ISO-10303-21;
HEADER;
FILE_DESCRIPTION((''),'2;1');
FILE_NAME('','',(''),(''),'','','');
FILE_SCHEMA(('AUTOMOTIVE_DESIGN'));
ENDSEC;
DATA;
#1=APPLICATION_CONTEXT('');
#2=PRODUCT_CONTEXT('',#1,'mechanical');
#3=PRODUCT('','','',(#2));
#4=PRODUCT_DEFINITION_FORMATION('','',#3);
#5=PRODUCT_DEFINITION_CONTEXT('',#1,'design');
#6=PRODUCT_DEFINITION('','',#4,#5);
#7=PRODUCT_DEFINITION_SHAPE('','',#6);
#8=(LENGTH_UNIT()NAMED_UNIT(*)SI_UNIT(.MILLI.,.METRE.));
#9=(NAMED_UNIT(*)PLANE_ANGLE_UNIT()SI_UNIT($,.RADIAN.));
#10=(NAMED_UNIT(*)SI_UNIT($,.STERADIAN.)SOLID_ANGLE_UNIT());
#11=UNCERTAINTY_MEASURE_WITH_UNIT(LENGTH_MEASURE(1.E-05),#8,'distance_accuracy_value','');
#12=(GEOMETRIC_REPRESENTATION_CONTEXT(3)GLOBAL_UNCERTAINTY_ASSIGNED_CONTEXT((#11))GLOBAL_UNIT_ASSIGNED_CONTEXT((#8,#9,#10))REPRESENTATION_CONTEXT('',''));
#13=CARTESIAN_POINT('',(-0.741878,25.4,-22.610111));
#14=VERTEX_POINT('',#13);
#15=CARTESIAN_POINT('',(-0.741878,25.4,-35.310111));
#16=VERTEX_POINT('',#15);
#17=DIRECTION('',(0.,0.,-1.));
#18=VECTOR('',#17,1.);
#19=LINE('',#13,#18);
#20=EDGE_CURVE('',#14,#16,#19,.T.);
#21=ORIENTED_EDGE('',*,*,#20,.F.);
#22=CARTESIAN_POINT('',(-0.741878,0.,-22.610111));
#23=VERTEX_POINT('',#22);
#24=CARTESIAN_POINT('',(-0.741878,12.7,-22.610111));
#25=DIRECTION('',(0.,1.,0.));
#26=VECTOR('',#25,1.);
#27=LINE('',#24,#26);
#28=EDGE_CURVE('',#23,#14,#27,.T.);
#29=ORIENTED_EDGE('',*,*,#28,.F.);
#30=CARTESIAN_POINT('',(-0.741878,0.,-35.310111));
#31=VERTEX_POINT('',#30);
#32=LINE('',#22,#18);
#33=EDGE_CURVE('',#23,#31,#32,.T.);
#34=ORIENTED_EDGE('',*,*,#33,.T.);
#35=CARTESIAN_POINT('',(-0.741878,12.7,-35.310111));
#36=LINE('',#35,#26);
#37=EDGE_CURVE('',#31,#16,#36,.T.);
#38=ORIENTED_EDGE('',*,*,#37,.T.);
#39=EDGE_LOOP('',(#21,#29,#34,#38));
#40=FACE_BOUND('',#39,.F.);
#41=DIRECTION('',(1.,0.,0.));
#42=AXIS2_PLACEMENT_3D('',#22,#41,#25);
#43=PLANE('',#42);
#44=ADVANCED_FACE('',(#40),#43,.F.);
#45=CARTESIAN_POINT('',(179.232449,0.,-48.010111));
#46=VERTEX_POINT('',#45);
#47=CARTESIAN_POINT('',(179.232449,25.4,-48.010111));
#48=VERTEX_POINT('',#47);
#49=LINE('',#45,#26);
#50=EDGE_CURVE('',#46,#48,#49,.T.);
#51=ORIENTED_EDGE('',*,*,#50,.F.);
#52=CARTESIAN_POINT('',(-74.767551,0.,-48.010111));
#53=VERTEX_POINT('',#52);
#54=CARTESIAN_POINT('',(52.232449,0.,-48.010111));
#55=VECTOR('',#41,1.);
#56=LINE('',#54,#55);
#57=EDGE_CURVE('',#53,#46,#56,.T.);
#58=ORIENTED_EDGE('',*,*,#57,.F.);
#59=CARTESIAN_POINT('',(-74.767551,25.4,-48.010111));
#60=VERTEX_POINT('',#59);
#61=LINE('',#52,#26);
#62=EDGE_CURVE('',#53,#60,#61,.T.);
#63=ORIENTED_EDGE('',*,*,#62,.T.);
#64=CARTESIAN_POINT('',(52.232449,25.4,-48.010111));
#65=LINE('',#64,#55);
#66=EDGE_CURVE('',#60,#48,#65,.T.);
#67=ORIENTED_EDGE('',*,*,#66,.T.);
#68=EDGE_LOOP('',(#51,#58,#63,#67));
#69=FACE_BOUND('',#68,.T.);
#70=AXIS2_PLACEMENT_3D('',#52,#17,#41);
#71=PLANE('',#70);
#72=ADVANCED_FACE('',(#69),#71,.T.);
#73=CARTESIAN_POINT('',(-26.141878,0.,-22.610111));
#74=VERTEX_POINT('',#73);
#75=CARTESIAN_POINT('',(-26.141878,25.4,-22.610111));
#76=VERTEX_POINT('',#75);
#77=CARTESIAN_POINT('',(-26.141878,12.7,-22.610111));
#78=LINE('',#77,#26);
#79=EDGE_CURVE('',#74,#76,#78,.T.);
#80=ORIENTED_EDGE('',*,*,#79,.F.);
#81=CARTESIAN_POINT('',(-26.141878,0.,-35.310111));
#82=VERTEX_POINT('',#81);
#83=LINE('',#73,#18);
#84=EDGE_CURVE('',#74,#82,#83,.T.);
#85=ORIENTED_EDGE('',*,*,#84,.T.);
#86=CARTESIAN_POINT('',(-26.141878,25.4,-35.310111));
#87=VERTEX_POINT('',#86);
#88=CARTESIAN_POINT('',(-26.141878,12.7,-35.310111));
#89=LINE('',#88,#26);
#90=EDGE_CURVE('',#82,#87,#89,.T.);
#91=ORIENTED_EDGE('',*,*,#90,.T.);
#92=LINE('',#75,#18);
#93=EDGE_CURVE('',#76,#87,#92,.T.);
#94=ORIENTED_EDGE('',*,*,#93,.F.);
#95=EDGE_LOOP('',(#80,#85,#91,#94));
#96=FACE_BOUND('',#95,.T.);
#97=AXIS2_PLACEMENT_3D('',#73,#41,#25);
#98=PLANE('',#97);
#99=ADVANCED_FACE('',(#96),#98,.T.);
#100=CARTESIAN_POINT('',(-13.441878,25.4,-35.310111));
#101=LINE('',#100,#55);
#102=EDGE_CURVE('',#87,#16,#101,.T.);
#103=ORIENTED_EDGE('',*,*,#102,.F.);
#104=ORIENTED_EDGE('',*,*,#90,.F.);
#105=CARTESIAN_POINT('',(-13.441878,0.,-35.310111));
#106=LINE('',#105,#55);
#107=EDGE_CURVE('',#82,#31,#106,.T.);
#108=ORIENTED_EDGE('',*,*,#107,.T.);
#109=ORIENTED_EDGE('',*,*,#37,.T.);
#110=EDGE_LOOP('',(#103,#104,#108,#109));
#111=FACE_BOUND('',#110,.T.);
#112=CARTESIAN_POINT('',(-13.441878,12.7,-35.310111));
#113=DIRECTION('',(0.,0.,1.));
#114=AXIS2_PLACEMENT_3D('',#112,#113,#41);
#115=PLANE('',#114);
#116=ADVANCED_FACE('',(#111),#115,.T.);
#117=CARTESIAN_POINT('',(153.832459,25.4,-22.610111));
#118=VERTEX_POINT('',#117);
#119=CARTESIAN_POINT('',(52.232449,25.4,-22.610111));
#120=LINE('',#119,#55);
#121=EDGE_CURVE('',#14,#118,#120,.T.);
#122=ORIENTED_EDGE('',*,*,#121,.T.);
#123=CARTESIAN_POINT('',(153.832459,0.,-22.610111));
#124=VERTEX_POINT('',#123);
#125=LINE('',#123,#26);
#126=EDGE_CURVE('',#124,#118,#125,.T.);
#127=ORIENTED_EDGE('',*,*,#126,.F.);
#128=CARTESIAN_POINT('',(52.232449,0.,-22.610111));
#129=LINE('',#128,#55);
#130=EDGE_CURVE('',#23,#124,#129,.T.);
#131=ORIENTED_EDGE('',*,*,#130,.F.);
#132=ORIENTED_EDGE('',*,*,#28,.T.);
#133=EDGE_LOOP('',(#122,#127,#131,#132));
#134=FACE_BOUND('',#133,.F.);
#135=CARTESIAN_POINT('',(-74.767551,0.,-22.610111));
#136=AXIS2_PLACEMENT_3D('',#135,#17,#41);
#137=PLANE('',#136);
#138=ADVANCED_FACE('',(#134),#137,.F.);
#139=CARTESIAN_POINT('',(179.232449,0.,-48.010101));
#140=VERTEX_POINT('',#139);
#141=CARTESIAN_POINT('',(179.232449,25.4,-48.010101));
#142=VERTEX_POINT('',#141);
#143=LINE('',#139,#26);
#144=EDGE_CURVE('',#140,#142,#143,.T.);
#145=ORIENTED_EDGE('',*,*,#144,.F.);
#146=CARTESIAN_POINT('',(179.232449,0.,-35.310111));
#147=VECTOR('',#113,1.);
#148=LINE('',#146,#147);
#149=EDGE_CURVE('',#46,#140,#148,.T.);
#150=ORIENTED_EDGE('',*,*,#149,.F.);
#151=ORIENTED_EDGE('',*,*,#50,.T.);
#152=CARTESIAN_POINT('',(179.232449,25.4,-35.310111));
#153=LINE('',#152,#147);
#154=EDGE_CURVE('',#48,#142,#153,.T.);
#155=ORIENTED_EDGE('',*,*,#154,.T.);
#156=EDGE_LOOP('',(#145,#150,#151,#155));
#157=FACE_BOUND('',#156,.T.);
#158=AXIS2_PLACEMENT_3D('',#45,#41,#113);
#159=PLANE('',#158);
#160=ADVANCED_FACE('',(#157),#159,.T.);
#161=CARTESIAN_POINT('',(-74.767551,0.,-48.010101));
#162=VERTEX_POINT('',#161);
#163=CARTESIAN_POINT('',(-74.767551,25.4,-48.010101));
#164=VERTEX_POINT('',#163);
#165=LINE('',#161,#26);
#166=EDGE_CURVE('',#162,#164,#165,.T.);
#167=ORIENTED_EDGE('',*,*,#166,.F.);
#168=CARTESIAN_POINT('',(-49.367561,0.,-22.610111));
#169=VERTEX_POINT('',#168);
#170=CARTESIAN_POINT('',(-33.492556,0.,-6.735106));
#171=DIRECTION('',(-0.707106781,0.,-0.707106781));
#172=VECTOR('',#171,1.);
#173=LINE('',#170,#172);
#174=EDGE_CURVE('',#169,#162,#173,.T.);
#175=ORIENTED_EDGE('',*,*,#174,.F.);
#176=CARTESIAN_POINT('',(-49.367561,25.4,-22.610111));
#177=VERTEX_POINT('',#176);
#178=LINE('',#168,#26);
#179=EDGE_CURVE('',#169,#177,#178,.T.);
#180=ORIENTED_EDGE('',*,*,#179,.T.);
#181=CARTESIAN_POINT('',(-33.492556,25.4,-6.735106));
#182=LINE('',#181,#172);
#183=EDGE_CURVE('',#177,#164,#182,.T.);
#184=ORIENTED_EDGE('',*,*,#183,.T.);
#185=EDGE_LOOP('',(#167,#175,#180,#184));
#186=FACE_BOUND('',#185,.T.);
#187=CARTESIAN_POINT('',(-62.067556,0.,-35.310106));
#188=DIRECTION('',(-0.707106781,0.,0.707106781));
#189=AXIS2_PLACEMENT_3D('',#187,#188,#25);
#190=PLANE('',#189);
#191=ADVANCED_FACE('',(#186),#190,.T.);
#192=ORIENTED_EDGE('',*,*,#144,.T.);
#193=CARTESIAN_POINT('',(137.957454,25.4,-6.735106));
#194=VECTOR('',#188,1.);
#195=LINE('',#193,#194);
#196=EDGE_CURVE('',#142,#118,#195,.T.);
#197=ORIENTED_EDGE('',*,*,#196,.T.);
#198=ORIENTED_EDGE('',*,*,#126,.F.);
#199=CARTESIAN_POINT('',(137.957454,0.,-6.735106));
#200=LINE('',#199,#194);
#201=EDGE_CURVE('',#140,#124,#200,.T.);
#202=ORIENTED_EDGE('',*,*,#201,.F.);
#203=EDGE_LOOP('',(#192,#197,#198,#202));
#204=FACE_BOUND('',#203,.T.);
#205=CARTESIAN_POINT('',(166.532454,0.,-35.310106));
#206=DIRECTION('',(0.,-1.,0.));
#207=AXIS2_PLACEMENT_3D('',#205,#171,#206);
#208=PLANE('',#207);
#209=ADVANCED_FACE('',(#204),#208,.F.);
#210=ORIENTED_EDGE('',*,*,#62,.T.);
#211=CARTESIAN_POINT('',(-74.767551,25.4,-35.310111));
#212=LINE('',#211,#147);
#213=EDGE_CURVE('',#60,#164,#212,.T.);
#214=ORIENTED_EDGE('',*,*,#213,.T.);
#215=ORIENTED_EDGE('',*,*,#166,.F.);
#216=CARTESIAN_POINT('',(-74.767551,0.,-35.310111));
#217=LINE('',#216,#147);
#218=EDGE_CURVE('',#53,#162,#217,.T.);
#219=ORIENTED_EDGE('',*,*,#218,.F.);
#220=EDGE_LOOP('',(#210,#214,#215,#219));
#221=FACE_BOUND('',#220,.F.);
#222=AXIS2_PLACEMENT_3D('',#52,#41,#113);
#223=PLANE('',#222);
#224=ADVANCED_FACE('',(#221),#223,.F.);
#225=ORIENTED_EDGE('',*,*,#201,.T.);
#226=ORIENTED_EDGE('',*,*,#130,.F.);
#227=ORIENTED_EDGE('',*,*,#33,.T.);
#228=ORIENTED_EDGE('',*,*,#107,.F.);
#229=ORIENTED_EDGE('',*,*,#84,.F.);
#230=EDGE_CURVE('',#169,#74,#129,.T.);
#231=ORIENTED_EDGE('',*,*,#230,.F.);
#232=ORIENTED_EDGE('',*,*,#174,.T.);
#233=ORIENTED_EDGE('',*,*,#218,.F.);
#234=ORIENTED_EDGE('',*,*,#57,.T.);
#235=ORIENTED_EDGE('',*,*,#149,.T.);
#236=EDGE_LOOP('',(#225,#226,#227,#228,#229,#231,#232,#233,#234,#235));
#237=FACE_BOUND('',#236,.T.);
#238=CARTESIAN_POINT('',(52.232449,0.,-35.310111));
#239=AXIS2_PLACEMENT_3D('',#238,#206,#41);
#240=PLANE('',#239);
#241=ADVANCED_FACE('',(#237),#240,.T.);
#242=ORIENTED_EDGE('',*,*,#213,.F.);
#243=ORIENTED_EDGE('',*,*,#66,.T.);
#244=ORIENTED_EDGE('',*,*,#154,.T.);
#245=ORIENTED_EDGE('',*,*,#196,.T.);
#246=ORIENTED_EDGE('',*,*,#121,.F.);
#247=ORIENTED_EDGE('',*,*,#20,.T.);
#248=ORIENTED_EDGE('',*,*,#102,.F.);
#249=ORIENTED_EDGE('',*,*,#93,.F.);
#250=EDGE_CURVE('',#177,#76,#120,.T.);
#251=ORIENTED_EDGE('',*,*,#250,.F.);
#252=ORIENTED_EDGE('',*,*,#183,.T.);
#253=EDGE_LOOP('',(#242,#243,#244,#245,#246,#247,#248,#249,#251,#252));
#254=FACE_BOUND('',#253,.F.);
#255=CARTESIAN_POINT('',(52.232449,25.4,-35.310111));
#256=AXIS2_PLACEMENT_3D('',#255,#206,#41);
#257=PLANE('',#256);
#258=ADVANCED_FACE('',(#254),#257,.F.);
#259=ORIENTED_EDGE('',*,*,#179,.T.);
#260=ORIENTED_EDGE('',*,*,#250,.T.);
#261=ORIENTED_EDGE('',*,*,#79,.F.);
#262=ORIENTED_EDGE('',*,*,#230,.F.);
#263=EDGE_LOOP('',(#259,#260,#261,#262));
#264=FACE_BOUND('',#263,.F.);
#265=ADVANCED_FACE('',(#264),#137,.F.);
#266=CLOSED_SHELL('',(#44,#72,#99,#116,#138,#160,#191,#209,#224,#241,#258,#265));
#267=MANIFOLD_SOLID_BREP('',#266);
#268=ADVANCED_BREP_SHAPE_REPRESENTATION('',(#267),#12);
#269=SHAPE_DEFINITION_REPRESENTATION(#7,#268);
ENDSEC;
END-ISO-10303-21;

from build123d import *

# Parameters (mm, degrees)
F0_W     = 254
F0_H     = 25.4
F1_DEPTH = 25.4
F2_SIZE2 = 25.39999
F2_SIZE  = 25.39999
F3_SIZE2 = 25.39999
F3_SIZE  = 25.39999
F4_W     = 25.4
F4_H     = 25.4
F5_DEPTH = 12.7


# Not quite as in the source:
# - a fillet or chamfer is up to 0.001 mm smaller than in the source, because OpenCascade refuses the exact size


with BuildPart() as f1:
    # F0 (on Front) → F1 (new body)
    with BuildSketch(Plane.XZ):
        with Locations((52.2324490321, -35.310111469)):
            Rectangle(F0_W, F0_H)
    extrude(amount=-F1_DEPTH)

    # F2 (size 25.4 and 25.4 in the source; OpenCascade refuses exactly that, so slightly less here)
    f2_edges = [f1.edges().sort_by_distance(p)[0] for p in [
        (179.232449, 12.7, -22.610111),
    ]]
    chamfer(f2_edges, length=F2_SIZE, length2=F2_SIZE2)

    # F3 (size 25.4 and 25.4 in the source; OpenCascade refuses exactly that, so slightly less here)
    f3_edges = [f1.edges().sort_by_distance(p)[0] for p in [
        (-74.767551, 12.7, -22.610111),
    ]]
    chamfer(f3_edges, length=F3_SIZE, length2=F3_SIZE2)

    # F4 (on face) → F5 (cut)
    with BuildSketch(Plane.XY.offset(-22.610111469)):
        with Locations((-13.4418782175, 12.7)):
            Rectangle(F4_W, F4_H)
    extrude(amount=-F5_DEPTH, mode=Mode.SUBTRACT)


solid = f1.part
